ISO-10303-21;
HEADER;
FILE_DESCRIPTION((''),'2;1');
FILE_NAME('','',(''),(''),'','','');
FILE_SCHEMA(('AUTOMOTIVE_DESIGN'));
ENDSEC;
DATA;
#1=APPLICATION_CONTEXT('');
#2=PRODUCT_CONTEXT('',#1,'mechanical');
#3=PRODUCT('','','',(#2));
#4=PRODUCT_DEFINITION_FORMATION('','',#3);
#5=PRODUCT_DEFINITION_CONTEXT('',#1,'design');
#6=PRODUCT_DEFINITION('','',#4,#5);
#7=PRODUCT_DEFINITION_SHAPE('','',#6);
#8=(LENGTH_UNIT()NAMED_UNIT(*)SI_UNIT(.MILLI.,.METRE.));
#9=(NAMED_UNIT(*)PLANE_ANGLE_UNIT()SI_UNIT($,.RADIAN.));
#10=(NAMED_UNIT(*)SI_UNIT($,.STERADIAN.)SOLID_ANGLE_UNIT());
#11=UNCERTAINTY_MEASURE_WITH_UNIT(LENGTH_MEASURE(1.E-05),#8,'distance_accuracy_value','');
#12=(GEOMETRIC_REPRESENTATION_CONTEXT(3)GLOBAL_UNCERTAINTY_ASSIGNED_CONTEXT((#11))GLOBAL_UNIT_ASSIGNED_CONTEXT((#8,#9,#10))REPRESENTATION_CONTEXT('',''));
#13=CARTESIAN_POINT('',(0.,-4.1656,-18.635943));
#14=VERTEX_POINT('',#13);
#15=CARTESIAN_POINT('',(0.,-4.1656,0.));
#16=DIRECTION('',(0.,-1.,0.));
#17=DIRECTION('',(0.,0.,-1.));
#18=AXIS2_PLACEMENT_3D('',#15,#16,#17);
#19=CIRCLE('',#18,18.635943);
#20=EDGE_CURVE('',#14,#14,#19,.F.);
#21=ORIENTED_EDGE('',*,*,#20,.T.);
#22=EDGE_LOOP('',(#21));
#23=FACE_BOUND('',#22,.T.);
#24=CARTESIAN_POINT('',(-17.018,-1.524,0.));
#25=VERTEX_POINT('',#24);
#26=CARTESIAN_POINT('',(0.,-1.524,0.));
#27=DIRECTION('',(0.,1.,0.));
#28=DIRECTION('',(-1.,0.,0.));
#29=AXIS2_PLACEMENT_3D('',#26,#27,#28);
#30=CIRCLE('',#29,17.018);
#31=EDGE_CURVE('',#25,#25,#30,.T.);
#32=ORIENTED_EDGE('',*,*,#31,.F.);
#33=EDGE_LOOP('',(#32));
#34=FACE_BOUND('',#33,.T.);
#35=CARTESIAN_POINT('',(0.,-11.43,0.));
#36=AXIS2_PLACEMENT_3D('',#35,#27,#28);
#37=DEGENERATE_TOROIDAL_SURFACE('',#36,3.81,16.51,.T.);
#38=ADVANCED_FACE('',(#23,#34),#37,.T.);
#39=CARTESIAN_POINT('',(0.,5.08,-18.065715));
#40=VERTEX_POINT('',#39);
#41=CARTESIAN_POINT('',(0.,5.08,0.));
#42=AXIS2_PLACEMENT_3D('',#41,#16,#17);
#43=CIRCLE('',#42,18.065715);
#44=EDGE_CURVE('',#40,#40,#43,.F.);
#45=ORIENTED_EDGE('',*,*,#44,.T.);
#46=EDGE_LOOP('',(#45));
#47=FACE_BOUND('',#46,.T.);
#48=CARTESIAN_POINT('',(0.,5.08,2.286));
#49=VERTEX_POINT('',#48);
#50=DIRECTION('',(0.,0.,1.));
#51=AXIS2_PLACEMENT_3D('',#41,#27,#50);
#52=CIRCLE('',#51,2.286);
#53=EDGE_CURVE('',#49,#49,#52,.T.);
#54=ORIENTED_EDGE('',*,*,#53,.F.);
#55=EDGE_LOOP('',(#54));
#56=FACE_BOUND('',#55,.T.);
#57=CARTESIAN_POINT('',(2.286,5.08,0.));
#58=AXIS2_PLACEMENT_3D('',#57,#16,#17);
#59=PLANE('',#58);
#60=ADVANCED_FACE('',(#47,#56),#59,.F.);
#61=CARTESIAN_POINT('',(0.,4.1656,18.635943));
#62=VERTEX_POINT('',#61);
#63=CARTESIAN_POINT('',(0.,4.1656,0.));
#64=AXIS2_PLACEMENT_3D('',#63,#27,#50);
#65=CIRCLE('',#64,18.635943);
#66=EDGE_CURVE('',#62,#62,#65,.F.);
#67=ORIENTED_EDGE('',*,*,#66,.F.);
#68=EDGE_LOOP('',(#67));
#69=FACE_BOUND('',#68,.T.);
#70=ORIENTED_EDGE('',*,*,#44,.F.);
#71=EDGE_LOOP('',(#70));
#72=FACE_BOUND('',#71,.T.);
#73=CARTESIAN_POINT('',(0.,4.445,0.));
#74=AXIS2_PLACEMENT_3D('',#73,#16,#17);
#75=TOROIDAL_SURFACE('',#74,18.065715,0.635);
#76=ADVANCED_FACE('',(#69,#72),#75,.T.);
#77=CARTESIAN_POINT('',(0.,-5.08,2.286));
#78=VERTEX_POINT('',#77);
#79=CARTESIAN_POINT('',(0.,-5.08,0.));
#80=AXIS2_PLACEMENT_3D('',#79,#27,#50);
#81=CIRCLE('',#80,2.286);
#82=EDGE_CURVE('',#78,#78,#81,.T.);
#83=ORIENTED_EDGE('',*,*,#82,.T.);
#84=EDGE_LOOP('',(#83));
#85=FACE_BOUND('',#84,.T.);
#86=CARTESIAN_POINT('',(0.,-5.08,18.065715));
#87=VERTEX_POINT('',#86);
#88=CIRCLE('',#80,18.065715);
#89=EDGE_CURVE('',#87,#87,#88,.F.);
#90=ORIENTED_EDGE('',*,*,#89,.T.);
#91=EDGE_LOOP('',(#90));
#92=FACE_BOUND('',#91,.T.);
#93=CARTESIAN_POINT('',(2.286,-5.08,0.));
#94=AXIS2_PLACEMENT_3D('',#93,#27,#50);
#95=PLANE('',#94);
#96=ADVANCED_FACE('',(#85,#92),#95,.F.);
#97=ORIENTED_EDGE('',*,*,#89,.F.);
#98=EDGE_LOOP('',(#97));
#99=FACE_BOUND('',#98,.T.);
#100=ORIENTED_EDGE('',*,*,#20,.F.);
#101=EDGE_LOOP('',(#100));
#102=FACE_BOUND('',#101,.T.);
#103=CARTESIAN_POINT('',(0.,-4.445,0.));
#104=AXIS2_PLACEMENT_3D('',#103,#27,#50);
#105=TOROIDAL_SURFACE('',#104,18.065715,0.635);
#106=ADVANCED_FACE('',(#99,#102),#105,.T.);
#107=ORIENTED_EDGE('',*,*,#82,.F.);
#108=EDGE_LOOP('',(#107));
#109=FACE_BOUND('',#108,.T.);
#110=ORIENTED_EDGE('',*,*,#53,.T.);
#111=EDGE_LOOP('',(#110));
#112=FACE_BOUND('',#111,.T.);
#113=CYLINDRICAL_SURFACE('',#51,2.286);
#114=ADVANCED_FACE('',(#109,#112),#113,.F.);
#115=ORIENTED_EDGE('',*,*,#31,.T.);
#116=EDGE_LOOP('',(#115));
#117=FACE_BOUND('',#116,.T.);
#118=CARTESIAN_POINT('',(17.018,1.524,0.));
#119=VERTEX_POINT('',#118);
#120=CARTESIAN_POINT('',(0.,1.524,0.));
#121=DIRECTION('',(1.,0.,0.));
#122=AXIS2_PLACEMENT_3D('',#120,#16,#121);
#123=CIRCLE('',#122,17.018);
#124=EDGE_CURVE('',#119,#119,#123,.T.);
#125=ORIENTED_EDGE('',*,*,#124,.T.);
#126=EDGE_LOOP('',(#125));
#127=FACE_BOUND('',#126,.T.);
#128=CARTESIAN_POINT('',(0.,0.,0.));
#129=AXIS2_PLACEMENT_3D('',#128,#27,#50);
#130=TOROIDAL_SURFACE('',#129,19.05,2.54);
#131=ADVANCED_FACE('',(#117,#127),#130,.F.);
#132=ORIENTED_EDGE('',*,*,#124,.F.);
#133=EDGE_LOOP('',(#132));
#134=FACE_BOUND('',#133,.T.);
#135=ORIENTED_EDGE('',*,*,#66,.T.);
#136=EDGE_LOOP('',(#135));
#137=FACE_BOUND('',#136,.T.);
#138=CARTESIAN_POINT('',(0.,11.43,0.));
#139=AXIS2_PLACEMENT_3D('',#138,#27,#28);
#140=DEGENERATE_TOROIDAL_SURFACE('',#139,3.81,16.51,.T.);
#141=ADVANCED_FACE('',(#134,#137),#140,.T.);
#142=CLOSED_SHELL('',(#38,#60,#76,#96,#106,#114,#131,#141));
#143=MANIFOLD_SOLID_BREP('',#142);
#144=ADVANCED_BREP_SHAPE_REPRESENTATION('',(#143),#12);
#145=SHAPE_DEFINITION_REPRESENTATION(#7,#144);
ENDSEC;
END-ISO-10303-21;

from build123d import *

# Parameters (mm, degrees)
FILLET1_R = 16.51
FILLET2_R = 0.635


with BuildPart() as part:
    # Sketch1 → Revolve1 (revolve)
    with BuildSketch(Plane.XY, mode=Mode.PRIVATE) as revolve1_sk:
        with BuildLine():
            Line((2.286, 5.08), (2.286, -5.08))
            Line((2.286, -5.08), (19.05, -5.08))
            Line((19.05, -5.08), (19.05, -2.54))
            ThreePointArc((19.05, -2.54), (16.51, 0), (19.05, 2.54))
            Line((19.05, 2.54), (19.05, 5.08))
            Line((19.05, 5.08), (2.286, 5.08))
        make_face()
    revolve(revolve1_sk.sketch.rotate(Axis((0, 5.08, 0), (0, -1, 0)), 90), axis=Axis((0, 5.08, 0), (0, -1, 0)))

    # Fillet1
    # the kernel refuses this fillet: 16.51 mm, written as the material it takes off along each edge
    with BuildSketch(Plane(origin=(0, 2.54, 0), x_dir=(0, 0, 1), z_dir=(1, 0, 0))) as fillet1_piece_1:
        with BuildLine():
            CenterArc((3.81, -8.89), FILLET1_R, 22.619864948, 14.250032698)
            Line((19.05, -2.54), (19.3548, -2.413))
            ThreePointArc((19.3548, -2.413), (19.3802, -1.27), (19.3802, 0))
            Line((19.3802, 0), (19.05, 0.3302))
            ThreePointArc((19.05, 0.3302), (18.061747397, 0.563494793), (17.28216, 1.21412))
            Line((17.28216, 1.21412), (17.018, 1.016))
        make_face()
    revolve(axis=Axis((0, 2.54, 0), (0, -1, 0)), mode=Mode.SUBTRACT)
    with BuildSketch(Plane(origin=(0, -2.54, 0), x_dir=(0, 0, 1), z_dir=(1, 0, 0))) as fillet1_piece_2:
        with BuildLine():
            CenterArc((3.81, 8.89), FILLET1_R, 323.130102354, 14.250032698)
            Line((17.018, -1.016), (17.28216, -1.21412))
            ThreePointArc((17.28216, -1.21412), (18.061747397, -0.563494793), (19.05, -0.3302))
            Line((19.05, -0.3302), (19.3802, 0))
            ThreePointArc((19.3802, 0), (19.3802, 1.27), (19.3548, 2.413))
            Line((19.3548, 2.413), (19.05, 2.54))
        make_face()
    revolve(axis=Axis((0, -2.54, 0), (0, -1, 0)), mode=Mode.SUBTRACT)

    # Fillet2
    fillet2_edges = [part.edges().sort_by_distance(p)[0] for p in [
        (0, 5.08, -19.05),
        (0, -5.08, -19.05),
    ]]
    fillet(fillet2_edges, radius=FILLET2_R)


solid = part.part
